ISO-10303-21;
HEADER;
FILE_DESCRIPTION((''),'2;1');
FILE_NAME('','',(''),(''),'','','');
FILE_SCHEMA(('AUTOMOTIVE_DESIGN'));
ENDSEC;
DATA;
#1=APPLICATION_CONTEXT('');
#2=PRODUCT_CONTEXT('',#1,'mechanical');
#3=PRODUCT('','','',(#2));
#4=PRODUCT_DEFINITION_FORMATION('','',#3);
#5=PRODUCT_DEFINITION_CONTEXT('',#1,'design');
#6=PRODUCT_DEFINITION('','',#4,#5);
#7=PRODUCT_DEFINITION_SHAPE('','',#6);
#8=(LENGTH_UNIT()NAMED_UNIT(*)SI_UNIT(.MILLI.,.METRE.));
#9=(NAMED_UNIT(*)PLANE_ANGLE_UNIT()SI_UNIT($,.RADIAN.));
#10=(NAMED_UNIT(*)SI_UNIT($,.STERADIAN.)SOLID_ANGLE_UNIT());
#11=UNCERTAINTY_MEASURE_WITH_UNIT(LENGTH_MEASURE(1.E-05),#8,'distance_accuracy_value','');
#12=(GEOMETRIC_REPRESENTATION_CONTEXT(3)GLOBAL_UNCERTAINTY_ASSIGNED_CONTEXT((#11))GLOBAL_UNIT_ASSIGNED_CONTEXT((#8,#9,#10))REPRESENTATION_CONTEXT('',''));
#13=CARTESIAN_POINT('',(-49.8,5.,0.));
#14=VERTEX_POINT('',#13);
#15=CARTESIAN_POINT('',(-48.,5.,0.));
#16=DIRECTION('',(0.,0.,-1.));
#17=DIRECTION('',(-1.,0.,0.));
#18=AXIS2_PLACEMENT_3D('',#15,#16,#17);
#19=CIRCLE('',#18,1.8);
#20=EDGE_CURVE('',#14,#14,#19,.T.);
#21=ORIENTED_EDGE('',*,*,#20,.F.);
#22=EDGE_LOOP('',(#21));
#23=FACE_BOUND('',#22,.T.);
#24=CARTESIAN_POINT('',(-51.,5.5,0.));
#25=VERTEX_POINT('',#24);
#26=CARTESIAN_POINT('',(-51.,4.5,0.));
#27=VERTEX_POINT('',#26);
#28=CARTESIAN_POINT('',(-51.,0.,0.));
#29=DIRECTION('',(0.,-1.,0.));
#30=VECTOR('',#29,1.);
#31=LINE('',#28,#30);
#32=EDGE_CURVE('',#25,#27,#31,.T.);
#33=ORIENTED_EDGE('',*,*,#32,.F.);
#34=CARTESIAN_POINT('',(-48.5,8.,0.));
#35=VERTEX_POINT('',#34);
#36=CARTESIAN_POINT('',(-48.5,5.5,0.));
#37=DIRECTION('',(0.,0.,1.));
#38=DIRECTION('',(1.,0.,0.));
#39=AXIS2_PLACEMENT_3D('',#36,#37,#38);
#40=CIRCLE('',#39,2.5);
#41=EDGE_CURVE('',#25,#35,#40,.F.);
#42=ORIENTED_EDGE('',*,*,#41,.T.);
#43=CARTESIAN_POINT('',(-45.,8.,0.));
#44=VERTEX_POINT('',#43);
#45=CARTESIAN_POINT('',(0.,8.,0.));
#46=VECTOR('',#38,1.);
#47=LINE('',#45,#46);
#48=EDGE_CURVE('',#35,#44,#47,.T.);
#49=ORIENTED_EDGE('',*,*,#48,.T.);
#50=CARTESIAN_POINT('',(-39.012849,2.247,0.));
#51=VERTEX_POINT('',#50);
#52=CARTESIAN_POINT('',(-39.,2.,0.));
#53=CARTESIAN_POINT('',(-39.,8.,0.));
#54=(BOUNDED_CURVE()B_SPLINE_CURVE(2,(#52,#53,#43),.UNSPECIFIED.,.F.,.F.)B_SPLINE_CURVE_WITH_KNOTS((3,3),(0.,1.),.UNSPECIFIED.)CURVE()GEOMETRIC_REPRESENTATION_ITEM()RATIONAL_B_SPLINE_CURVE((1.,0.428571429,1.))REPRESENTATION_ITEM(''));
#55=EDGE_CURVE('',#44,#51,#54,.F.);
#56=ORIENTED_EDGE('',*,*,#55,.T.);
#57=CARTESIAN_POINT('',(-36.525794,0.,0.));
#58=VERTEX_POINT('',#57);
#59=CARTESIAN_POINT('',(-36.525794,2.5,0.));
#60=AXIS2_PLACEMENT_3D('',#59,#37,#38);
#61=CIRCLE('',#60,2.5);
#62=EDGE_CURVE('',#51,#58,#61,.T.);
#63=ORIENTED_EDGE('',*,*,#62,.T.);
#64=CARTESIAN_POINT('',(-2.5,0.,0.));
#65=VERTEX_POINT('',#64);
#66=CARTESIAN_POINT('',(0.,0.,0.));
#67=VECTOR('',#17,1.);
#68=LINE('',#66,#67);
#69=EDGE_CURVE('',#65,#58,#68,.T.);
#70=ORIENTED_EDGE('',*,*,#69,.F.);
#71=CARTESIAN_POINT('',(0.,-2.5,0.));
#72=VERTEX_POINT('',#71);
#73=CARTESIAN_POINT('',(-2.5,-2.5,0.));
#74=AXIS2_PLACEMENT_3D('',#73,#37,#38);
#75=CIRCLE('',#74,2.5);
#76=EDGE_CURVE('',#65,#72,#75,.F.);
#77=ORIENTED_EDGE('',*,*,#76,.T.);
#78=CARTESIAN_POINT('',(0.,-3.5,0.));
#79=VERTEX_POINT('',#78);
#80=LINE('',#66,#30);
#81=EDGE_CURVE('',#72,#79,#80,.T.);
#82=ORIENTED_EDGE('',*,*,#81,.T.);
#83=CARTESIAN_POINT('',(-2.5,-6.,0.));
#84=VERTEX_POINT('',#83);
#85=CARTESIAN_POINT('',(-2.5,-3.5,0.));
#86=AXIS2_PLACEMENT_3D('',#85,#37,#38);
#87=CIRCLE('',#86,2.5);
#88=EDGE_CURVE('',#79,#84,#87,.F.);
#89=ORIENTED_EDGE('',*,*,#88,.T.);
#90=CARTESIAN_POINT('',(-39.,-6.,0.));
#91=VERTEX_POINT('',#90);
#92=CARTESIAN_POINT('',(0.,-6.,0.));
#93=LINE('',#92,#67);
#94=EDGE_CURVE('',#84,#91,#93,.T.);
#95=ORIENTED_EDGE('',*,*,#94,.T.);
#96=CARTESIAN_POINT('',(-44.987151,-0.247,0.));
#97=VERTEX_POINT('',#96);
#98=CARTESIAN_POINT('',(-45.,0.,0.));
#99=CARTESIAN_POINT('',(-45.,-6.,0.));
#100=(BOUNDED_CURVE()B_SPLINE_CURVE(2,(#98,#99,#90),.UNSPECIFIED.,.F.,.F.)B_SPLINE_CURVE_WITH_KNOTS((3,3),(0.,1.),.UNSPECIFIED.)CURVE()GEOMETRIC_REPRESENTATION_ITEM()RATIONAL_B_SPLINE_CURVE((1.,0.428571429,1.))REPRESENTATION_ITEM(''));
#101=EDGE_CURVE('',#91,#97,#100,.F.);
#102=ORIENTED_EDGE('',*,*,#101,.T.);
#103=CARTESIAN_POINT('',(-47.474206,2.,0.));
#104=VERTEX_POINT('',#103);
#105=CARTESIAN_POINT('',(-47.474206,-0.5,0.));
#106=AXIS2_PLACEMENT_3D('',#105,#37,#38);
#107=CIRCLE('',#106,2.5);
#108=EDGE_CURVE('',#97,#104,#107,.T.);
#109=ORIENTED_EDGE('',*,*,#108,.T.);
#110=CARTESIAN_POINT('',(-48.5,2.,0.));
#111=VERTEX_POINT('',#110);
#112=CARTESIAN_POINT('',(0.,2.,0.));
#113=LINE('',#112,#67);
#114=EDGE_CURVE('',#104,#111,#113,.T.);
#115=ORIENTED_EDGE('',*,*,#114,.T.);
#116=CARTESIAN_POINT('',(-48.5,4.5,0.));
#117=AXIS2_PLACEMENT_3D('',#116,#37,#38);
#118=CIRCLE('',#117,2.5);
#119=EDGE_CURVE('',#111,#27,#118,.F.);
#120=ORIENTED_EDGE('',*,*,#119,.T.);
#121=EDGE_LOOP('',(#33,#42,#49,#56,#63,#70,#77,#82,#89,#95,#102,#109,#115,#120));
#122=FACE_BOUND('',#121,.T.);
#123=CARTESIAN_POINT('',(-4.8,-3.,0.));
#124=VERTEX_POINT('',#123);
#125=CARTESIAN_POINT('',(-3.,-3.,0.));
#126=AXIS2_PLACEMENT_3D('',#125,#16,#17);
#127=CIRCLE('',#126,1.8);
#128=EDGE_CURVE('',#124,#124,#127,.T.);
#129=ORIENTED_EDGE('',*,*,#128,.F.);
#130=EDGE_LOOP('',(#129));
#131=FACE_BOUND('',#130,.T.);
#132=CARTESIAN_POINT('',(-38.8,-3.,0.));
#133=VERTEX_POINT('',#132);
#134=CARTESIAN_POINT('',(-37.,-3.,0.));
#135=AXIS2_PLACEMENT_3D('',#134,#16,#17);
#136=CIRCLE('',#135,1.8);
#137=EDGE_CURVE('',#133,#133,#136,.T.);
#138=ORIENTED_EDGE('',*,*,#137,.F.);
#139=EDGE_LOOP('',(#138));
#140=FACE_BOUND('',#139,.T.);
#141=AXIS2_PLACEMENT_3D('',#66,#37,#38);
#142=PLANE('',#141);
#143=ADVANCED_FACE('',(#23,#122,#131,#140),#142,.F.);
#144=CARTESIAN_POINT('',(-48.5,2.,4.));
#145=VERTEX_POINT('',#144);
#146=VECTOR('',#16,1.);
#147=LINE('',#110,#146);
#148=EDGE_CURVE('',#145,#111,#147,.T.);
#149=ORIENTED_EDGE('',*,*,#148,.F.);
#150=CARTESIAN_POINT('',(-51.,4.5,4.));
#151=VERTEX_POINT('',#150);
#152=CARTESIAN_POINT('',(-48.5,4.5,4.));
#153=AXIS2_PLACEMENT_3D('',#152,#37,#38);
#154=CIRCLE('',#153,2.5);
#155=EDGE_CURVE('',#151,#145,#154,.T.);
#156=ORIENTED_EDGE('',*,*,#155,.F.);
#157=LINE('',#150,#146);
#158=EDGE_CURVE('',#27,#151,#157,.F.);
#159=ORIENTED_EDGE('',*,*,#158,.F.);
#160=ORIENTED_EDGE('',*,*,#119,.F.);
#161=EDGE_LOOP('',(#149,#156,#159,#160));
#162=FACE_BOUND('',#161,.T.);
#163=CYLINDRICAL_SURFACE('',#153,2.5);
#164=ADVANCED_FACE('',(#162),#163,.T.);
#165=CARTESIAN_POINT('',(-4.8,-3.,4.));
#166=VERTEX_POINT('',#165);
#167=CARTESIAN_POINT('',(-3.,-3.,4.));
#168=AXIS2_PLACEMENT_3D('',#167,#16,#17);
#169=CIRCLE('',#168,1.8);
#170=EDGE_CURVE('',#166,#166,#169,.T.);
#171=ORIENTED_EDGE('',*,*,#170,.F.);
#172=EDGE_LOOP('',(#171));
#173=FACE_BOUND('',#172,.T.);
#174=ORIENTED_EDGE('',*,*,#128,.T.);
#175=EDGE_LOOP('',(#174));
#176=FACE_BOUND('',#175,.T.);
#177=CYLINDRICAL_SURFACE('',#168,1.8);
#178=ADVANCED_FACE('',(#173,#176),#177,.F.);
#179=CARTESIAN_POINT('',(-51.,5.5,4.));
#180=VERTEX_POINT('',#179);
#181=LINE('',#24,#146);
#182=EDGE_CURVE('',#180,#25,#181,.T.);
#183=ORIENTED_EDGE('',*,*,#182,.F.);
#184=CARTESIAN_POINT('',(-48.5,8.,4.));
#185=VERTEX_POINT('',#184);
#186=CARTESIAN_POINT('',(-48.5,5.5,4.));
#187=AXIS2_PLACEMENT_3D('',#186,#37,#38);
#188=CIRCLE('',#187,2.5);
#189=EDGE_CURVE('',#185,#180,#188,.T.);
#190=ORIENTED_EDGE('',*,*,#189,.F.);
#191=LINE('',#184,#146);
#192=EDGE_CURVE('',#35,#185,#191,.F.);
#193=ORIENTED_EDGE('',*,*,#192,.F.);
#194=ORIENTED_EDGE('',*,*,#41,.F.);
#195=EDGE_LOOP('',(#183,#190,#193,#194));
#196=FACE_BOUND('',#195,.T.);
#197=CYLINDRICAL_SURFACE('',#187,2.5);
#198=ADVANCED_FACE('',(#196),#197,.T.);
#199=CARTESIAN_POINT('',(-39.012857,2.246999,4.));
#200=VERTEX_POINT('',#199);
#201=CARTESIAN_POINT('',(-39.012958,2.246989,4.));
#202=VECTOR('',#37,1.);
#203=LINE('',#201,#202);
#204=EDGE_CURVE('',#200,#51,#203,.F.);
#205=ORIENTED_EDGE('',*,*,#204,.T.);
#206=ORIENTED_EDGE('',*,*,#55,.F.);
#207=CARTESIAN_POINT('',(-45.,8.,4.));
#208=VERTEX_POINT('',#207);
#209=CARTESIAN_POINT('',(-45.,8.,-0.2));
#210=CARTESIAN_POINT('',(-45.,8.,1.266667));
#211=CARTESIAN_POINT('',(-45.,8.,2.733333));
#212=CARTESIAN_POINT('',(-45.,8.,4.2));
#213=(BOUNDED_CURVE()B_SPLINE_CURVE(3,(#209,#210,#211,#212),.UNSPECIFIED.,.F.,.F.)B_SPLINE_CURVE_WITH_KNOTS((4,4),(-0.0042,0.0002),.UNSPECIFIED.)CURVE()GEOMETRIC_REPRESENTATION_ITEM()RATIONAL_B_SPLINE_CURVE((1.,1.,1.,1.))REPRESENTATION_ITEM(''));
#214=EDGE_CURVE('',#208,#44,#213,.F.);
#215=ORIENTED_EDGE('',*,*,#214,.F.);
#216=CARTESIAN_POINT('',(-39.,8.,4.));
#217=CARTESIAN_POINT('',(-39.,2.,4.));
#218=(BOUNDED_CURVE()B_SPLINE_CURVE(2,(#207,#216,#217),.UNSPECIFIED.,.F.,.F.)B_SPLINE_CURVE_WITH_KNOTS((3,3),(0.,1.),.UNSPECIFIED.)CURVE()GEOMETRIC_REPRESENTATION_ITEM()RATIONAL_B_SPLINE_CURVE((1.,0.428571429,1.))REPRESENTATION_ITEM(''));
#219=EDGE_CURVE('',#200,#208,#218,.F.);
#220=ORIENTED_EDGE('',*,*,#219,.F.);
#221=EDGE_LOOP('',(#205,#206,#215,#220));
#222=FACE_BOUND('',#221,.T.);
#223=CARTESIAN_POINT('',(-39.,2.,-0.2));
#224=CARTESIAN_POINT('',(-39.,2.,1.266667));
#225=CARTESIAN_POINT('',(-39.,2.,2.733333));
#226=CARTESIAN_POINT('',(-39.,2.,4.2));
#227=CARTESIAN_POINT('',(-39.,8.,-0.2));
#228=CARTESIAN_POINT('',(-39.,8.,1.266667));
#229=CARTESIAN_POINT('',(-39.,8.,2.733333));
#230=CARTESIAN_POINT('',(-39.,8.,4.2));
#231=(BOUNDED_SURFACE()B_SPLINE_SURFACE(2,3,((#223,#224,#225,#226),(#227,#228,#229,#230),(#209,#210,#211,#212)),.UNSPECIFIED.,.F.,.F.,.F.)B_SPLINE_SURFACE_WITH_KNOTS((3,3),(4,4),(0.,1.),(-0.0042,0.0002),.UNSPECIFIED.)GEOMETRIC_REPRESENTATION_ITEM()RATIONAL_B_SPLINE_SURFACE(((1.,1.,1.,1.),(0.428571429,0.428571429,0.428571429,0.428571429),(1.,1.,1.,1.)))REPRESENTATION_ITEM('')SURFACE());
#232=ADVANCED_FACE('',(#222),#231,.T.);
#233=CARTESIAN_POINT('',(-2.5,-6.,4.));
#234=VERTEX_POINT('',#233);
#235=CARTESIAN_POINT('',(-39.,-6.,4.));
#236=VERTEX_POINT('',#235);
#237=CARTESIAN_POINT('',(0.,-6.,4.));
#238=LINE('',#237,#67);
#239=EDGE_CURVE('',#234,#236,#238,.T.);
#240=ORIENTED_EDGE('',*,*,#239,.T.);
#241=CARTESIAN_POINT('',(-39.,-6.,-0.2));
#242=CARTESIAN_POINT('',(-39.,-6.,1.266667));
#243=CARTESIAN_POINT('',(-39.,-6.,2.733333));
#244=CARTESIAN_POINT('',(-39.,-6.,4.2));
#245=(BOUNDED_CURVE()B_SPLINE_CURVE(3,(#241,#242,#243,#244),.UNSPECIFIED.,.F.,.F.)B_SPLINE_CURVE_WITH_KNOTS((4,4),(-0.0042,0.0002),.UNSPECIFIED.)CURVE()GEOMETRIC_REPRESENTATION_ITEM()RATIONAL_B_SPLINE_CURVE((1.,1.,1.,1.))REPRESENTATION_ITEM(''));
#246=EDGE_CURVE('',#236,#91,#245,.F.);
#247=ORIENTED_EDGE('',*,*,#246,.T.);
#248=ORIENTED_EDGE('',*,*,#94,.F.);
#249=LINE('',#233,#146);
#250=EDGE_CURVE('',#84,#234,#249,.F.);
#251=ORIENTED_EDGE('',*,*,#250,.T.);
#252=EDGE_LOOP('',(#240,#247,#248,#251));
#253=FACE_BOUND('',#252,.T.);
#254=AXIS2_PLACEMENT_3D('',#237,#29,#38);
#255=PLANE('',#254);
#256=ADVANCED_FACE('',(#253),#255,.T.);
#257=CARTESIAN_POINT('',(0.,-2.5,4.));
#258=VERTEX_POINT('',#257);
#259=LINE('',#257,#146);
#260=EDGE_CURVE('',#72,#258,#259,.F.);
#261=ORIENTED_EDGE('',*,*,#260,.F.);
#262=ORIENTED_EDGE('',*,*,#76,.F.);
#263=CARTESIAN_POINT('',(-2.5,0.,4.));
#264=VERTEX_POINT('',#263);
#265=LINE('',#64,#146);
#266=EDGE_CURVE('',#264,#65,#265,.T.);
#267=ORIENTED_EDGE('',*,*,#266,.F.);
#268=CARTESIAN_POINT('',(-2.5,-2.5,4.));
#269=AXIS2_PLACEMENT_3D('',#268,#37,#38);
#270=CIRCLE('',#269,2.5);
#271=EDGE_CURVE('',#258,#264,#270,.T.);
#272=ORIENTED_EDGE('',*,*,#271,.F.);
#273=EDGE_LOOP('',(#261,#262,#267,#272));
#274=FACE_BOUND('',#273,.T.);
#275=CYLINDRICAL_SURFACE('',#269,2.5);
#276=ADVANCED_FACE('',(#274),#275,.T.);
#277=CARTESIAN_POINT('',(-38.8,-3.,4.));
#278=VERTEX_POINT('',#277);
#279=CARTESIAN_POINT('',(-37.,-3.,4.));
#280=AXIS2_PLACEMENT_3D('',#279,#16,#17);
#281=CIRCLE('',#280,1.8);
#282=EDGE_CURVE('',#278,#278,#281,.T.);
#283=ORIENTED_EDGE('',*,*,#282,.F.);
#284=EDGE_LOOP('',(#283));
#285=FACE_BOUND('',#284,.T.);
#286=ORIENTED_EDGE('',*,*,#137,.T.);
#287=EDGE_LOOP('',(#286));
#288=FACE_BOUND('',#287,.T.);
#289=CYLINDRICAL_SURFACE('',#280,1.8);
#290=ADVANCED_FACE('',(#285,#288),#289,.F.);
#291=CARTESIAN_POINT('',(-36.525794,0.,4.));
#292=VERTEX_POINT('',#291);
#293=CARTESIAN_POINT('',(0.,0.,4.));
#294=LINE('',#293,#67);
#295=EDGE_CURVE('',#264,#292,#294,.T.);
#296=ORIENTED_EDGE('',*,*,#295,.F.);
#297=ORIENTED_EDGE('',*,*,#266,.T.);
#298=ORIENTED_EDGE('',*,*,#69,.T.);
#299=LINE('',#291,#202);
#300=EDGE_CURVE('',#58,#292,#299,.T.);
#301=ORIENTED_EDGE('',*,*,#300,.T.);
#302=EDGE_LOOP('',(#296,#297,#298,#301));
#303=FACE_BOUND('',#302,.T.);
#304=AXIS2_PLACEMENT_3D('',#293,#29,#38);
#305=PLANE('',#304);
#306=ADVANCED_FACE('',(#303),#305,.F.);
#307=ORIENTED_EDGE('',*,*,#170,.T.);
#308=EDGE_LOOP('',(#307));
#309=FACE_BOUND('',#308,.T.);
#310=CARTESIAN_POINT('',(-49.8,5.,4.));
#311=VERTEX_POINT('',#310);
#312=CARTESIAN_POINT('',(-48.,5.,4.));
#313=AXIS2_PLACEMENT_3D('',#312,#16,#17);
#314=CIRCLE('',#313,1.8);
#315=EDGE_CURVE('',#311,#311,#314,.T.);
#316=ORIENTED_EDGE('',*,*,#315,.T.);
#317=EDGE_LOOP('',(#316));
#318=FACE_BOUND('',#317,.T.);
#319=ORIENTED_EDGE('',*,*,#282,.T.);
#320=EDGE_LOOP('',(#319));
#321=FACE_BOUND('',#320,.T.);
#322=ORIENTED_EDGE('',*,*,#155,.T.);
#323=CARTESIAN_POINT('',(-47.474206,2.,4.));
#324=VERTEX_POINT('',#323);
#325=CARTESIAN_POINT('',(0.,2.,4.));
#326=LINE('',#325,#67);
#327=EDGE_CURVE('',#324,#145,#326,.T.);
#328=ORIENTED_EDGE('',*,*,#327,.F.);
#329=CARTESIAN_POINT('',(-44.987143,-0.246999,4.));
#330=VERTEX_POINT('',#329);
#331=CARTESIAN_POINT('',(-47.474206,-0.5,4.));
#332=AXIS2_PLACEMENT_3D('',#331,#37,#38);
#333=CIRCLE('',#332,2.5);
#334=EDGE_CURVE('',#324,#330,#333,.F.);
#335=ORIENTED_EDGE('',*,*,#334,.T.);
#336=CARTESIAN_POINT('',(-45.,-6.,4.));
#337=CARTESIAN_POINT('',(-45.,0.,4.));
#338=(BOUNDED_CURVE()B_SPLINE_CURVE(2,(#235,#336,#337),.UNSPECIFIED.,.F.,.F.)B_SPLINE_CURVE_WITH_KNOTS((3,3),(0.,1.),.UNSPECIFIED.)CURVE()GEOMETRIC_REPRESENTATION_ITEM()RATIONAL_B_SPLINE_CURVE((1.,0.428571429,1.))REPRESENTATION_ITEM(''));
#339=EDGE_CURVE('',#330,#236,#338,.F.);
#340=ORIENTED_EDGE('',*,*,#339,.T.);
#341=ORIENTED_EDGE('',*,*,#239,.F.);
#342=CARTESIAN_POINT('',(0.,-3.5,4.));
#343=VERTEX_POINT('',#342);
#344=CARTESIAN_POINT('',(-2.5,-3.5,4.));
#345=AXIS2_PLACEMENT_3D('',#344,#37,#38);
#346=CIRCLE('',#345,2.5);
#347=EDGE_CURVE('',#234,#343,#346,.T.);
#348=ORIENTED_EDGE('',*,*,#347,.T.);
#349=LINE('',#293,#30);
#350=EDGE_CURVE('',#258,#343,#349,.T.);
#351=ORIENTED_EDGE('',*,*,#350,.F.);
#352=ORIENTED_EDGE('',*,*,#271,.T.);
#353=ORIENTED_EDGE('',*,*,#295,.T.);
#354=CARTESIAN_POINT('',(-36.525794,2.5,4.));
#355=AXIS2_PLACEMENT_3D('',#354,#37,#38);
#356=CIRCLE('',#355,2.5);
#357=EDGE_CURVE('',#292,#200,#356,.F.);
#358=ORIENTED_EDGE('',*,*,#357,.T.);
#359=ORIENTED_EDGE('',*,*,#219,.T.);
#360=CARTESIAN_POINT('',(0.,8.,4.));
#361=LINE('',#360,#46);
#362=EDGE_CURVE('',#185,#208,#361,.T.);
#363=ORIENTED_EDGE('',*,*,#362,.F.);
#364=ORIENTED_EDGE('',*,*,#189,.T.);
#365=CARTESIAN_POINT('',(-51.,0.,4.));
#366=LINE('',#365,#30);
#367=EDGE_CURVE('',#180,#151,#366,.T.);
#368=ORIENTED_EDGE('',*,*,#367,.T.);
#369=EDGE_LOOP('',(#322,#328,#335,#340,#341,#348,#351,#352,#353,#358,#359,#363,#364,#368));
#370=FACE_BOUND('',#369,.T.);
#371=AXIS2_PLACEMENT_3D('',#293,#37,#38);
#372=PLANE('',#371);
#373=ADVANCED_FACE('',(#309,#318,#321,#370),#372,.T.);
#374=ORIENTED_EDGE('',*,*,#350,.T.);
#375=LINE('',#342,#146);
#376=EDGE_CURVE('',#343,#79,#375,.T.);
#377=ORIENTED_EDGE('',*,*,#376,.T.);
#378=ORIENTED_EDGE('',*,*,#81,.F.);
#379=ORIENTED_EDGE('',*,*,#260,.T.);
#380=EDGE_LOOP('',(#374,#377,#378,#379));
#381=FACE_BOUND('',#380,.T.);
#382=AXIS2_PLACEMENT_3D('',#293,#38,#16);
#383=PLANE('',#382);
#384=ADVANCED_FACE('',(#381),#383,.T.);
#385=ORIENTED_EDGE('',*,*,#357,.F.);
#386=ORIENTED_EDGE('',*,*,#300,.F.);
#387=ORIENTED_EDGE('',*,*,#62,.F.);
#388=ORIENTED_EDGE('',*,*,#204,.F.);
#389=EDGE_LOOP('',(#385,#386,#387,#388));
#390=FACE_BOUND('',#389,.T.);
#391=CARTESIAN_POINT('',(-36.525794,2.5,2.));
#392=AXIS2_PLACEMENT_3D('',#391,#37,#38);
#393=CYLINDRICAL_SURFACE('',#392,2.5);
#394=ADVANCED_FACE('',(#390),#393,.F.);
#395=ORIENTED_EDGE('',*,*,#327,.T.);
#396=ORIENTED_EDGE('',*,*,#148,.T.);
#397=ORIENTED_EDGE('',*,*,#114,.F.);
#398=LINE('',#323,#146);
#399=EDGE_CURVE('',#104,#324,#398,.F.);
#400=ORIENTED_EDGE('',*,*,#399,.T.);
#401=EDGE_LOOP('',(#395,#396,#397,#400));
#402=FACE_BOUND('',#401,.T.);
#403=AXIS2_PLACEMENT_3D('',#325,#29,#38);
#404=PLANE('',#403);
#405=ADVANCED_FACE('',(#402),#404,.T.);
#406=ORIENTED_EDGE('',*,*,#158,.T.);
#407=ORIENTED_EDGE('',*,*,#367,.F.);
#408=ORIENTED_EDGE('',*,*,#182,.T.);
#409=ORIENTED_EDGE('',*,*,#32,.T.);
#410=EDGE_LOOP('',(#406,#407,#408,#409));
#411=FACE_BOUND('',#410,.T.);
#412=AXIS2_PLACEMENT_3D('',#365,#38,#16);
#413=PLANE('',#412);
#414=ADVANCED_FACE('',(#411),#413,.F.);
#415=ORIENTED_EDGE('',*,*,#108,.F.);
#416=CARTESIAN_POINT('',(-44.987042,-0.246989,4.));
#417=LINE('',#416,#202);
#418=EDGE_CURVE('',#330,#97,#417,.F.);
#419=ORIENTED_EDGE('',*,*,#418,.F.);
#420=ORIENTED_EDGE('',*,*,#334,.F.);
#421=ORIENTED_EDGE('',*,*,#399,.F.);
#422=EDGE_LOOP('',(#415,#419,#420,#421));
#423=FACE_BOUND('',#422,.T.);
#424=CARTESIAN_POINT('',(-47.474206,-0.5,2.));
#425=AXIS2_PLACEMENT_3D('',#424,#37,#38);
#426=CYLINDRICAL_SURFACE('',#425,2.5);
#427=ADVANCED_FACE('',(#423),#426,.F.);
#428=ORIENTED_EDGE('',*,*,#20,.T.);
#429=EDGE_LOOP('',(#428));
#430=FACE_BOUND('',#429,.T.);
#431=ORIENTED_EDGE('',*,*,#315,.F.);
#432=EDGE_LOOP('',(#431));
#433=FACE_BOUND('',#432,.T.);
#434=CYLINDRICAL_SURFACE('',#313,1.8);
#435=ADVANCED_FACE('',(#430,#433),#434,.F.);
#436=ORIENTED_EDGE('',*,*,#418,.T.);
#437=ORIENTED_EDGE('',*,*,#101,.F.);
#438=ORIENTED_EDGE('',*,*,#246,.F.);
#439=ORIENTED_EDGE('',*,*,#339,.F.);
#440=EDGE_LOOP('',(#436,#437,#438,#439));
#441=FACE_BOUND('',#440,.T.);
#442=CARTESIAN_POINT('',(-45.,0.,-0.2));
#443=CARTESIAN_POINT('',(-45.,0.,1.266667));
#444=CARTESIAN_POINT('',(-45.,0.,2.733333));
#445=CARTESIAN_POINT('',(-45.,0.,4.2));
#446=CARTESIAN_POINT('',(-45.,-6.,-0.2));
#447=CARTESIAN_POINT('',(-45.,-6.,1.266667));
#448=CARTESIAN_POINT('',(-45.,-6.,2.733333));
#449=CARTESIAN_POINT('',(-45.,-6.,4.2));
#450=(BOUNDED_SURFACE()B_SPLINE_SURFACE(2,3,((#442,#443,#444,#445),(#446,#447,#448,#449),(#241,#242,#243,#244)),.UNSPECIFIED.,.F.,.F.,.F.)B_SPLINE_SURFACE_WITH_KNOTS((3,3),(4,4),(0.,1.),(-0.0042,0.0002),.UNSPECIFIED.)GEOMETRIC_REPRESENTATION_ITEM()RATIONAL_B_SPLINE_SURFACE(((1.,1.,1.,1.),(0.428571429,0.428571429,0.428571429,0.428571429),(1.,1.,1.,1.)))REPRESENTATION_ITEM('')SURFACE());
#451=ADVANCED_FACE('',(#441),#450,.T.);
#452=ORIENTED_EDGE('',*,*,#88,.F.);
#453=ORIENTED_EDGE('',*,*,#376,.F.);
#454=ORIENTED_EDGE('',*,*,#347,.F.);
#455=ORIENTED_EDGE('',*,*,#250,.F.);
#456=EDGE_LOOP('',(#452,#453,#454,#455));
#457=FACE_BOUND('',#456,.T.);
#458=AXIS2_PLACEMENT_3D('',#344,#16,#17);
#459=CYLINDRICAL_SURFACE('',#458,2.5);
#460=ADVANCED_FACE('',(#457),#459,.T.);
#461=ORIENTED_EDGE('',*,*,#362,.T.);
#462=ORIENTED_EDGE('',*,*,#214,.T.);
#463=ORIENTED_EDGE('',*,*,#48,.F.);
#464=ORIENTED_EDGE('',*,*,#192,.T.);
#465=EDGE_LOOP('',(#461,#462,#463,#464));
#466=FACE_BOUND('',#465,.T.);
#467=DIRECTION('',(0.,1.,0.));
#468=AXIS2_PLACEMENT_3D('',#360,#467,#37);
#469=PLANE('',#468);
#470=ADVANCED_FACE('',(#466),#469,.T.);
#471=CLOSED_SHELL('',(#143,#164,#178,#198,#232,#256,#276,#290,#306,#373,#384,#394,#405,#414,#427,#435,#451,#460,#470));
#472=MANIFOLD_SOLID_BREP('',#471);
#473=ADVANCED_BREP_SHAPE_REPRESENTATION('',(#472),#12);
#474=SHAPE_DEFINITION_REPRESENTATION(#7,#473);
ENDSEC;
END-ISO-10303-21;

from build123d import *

# Parameters (mm, degrees)
SKETCH1_W           = 45
SKETCH1_H           = 6
SKETCH1_W_2         = 6
BOSS_EXTRUDE1_DEPTH = 4
SKETCH2_R           = 1.8
CUT_EXTRUDE1_DEPTH  = 52.778373864
FILLET2_SIZE        = 6
FILLET3_R           = 2.5


with BuildPart() as part:
    # Sketch1 → Boss-Extrude1 (new body)
    with BuildSketch(Plane.XY):
        with Locations((-22.5, -3)):
            Rectangle(SKETCH1_W, SKETCH1_H)
        Polygon((-45, 0), (-39, 0), (-39, 8), (-45, 8), (-45, 2), align=None)
        with Locations((-48, 5)):
            Rectangle(SKETCH1_W_2, SKETCH1_H)
    extrude(amount=BOSS_EXTRUDE1_DEPTH)

    # Sketch2 → Cut-Extrude1 (cut, through all)
    with BuildSketch(Plane(origin=(0, 0, 0), x_dir=(-1, 0, 0), z_dir=(0, 0, -1))):
        with Locations((3, -3)):
            Circle(SKETCH2_R)
        with Locations((37, -3)):
            Circle(SKETCH2_R)
        with Locations((48, 5)):
            Circle(SKETCH2_R)
    extrude(amount=-CUT_EXTRUDE1_DEPTH, mode=Mode.SUBTRACT)

    # Fillet2
    # a fillet whose section is not a circle: 6 mm, written as the material it takes off along each edge
    with BuildSketch(Plane(origin=(-45, -6, -15), x_dir=(1, 0, 0), z_dir=(0, 0, 1))) as fillet2_piece_1:
        with BuildLine():
            Bezier((FILLET2_SIZE, 0), (0, 0), (0, FILLET2_SIZE), weights=[1, 0.428571429, 1])
            Line((0, FILLET2_SIZE), (0, 0))
            Line((0, 0), (FILLET2_SIZE, 0))
        make_face()
    extrude(amount=34, mode=Mode.SUBTRACT)
    with BuildSketch(Plane(origin=(-39, 8, -15), x_dir=(0, -1, 0), z_dir=(0, 0, 1))) as fillet2_piece_2:
        with BuildLine():
            Bezier((FILLET2_SIZE, 0), (0, 0), (0, -FILLET2_SIZE), weights=[1, 0.428571429, 1])
            Line((0, -FILLET2_SIZE), (0, 0))
            Line((0, 0), (FILLET2_SIZE, 0))
        make_face()
    extrude(amount=34, mode=Mode.SUBTRACT)

    # Fillet3
    fillet3_edges = [part.edges().sort_by_distance(p)[0] for p in [
        (-51, 8, 2),
        (-51, 2, 2),
        (-45, 2, 2),
        (-39, 0, 2),
        (0, 0, 2),
        (0, -6, 2),
    ]]
    fillet(fillet3_edges, radius=FILLET3_R)


solid = part.part
